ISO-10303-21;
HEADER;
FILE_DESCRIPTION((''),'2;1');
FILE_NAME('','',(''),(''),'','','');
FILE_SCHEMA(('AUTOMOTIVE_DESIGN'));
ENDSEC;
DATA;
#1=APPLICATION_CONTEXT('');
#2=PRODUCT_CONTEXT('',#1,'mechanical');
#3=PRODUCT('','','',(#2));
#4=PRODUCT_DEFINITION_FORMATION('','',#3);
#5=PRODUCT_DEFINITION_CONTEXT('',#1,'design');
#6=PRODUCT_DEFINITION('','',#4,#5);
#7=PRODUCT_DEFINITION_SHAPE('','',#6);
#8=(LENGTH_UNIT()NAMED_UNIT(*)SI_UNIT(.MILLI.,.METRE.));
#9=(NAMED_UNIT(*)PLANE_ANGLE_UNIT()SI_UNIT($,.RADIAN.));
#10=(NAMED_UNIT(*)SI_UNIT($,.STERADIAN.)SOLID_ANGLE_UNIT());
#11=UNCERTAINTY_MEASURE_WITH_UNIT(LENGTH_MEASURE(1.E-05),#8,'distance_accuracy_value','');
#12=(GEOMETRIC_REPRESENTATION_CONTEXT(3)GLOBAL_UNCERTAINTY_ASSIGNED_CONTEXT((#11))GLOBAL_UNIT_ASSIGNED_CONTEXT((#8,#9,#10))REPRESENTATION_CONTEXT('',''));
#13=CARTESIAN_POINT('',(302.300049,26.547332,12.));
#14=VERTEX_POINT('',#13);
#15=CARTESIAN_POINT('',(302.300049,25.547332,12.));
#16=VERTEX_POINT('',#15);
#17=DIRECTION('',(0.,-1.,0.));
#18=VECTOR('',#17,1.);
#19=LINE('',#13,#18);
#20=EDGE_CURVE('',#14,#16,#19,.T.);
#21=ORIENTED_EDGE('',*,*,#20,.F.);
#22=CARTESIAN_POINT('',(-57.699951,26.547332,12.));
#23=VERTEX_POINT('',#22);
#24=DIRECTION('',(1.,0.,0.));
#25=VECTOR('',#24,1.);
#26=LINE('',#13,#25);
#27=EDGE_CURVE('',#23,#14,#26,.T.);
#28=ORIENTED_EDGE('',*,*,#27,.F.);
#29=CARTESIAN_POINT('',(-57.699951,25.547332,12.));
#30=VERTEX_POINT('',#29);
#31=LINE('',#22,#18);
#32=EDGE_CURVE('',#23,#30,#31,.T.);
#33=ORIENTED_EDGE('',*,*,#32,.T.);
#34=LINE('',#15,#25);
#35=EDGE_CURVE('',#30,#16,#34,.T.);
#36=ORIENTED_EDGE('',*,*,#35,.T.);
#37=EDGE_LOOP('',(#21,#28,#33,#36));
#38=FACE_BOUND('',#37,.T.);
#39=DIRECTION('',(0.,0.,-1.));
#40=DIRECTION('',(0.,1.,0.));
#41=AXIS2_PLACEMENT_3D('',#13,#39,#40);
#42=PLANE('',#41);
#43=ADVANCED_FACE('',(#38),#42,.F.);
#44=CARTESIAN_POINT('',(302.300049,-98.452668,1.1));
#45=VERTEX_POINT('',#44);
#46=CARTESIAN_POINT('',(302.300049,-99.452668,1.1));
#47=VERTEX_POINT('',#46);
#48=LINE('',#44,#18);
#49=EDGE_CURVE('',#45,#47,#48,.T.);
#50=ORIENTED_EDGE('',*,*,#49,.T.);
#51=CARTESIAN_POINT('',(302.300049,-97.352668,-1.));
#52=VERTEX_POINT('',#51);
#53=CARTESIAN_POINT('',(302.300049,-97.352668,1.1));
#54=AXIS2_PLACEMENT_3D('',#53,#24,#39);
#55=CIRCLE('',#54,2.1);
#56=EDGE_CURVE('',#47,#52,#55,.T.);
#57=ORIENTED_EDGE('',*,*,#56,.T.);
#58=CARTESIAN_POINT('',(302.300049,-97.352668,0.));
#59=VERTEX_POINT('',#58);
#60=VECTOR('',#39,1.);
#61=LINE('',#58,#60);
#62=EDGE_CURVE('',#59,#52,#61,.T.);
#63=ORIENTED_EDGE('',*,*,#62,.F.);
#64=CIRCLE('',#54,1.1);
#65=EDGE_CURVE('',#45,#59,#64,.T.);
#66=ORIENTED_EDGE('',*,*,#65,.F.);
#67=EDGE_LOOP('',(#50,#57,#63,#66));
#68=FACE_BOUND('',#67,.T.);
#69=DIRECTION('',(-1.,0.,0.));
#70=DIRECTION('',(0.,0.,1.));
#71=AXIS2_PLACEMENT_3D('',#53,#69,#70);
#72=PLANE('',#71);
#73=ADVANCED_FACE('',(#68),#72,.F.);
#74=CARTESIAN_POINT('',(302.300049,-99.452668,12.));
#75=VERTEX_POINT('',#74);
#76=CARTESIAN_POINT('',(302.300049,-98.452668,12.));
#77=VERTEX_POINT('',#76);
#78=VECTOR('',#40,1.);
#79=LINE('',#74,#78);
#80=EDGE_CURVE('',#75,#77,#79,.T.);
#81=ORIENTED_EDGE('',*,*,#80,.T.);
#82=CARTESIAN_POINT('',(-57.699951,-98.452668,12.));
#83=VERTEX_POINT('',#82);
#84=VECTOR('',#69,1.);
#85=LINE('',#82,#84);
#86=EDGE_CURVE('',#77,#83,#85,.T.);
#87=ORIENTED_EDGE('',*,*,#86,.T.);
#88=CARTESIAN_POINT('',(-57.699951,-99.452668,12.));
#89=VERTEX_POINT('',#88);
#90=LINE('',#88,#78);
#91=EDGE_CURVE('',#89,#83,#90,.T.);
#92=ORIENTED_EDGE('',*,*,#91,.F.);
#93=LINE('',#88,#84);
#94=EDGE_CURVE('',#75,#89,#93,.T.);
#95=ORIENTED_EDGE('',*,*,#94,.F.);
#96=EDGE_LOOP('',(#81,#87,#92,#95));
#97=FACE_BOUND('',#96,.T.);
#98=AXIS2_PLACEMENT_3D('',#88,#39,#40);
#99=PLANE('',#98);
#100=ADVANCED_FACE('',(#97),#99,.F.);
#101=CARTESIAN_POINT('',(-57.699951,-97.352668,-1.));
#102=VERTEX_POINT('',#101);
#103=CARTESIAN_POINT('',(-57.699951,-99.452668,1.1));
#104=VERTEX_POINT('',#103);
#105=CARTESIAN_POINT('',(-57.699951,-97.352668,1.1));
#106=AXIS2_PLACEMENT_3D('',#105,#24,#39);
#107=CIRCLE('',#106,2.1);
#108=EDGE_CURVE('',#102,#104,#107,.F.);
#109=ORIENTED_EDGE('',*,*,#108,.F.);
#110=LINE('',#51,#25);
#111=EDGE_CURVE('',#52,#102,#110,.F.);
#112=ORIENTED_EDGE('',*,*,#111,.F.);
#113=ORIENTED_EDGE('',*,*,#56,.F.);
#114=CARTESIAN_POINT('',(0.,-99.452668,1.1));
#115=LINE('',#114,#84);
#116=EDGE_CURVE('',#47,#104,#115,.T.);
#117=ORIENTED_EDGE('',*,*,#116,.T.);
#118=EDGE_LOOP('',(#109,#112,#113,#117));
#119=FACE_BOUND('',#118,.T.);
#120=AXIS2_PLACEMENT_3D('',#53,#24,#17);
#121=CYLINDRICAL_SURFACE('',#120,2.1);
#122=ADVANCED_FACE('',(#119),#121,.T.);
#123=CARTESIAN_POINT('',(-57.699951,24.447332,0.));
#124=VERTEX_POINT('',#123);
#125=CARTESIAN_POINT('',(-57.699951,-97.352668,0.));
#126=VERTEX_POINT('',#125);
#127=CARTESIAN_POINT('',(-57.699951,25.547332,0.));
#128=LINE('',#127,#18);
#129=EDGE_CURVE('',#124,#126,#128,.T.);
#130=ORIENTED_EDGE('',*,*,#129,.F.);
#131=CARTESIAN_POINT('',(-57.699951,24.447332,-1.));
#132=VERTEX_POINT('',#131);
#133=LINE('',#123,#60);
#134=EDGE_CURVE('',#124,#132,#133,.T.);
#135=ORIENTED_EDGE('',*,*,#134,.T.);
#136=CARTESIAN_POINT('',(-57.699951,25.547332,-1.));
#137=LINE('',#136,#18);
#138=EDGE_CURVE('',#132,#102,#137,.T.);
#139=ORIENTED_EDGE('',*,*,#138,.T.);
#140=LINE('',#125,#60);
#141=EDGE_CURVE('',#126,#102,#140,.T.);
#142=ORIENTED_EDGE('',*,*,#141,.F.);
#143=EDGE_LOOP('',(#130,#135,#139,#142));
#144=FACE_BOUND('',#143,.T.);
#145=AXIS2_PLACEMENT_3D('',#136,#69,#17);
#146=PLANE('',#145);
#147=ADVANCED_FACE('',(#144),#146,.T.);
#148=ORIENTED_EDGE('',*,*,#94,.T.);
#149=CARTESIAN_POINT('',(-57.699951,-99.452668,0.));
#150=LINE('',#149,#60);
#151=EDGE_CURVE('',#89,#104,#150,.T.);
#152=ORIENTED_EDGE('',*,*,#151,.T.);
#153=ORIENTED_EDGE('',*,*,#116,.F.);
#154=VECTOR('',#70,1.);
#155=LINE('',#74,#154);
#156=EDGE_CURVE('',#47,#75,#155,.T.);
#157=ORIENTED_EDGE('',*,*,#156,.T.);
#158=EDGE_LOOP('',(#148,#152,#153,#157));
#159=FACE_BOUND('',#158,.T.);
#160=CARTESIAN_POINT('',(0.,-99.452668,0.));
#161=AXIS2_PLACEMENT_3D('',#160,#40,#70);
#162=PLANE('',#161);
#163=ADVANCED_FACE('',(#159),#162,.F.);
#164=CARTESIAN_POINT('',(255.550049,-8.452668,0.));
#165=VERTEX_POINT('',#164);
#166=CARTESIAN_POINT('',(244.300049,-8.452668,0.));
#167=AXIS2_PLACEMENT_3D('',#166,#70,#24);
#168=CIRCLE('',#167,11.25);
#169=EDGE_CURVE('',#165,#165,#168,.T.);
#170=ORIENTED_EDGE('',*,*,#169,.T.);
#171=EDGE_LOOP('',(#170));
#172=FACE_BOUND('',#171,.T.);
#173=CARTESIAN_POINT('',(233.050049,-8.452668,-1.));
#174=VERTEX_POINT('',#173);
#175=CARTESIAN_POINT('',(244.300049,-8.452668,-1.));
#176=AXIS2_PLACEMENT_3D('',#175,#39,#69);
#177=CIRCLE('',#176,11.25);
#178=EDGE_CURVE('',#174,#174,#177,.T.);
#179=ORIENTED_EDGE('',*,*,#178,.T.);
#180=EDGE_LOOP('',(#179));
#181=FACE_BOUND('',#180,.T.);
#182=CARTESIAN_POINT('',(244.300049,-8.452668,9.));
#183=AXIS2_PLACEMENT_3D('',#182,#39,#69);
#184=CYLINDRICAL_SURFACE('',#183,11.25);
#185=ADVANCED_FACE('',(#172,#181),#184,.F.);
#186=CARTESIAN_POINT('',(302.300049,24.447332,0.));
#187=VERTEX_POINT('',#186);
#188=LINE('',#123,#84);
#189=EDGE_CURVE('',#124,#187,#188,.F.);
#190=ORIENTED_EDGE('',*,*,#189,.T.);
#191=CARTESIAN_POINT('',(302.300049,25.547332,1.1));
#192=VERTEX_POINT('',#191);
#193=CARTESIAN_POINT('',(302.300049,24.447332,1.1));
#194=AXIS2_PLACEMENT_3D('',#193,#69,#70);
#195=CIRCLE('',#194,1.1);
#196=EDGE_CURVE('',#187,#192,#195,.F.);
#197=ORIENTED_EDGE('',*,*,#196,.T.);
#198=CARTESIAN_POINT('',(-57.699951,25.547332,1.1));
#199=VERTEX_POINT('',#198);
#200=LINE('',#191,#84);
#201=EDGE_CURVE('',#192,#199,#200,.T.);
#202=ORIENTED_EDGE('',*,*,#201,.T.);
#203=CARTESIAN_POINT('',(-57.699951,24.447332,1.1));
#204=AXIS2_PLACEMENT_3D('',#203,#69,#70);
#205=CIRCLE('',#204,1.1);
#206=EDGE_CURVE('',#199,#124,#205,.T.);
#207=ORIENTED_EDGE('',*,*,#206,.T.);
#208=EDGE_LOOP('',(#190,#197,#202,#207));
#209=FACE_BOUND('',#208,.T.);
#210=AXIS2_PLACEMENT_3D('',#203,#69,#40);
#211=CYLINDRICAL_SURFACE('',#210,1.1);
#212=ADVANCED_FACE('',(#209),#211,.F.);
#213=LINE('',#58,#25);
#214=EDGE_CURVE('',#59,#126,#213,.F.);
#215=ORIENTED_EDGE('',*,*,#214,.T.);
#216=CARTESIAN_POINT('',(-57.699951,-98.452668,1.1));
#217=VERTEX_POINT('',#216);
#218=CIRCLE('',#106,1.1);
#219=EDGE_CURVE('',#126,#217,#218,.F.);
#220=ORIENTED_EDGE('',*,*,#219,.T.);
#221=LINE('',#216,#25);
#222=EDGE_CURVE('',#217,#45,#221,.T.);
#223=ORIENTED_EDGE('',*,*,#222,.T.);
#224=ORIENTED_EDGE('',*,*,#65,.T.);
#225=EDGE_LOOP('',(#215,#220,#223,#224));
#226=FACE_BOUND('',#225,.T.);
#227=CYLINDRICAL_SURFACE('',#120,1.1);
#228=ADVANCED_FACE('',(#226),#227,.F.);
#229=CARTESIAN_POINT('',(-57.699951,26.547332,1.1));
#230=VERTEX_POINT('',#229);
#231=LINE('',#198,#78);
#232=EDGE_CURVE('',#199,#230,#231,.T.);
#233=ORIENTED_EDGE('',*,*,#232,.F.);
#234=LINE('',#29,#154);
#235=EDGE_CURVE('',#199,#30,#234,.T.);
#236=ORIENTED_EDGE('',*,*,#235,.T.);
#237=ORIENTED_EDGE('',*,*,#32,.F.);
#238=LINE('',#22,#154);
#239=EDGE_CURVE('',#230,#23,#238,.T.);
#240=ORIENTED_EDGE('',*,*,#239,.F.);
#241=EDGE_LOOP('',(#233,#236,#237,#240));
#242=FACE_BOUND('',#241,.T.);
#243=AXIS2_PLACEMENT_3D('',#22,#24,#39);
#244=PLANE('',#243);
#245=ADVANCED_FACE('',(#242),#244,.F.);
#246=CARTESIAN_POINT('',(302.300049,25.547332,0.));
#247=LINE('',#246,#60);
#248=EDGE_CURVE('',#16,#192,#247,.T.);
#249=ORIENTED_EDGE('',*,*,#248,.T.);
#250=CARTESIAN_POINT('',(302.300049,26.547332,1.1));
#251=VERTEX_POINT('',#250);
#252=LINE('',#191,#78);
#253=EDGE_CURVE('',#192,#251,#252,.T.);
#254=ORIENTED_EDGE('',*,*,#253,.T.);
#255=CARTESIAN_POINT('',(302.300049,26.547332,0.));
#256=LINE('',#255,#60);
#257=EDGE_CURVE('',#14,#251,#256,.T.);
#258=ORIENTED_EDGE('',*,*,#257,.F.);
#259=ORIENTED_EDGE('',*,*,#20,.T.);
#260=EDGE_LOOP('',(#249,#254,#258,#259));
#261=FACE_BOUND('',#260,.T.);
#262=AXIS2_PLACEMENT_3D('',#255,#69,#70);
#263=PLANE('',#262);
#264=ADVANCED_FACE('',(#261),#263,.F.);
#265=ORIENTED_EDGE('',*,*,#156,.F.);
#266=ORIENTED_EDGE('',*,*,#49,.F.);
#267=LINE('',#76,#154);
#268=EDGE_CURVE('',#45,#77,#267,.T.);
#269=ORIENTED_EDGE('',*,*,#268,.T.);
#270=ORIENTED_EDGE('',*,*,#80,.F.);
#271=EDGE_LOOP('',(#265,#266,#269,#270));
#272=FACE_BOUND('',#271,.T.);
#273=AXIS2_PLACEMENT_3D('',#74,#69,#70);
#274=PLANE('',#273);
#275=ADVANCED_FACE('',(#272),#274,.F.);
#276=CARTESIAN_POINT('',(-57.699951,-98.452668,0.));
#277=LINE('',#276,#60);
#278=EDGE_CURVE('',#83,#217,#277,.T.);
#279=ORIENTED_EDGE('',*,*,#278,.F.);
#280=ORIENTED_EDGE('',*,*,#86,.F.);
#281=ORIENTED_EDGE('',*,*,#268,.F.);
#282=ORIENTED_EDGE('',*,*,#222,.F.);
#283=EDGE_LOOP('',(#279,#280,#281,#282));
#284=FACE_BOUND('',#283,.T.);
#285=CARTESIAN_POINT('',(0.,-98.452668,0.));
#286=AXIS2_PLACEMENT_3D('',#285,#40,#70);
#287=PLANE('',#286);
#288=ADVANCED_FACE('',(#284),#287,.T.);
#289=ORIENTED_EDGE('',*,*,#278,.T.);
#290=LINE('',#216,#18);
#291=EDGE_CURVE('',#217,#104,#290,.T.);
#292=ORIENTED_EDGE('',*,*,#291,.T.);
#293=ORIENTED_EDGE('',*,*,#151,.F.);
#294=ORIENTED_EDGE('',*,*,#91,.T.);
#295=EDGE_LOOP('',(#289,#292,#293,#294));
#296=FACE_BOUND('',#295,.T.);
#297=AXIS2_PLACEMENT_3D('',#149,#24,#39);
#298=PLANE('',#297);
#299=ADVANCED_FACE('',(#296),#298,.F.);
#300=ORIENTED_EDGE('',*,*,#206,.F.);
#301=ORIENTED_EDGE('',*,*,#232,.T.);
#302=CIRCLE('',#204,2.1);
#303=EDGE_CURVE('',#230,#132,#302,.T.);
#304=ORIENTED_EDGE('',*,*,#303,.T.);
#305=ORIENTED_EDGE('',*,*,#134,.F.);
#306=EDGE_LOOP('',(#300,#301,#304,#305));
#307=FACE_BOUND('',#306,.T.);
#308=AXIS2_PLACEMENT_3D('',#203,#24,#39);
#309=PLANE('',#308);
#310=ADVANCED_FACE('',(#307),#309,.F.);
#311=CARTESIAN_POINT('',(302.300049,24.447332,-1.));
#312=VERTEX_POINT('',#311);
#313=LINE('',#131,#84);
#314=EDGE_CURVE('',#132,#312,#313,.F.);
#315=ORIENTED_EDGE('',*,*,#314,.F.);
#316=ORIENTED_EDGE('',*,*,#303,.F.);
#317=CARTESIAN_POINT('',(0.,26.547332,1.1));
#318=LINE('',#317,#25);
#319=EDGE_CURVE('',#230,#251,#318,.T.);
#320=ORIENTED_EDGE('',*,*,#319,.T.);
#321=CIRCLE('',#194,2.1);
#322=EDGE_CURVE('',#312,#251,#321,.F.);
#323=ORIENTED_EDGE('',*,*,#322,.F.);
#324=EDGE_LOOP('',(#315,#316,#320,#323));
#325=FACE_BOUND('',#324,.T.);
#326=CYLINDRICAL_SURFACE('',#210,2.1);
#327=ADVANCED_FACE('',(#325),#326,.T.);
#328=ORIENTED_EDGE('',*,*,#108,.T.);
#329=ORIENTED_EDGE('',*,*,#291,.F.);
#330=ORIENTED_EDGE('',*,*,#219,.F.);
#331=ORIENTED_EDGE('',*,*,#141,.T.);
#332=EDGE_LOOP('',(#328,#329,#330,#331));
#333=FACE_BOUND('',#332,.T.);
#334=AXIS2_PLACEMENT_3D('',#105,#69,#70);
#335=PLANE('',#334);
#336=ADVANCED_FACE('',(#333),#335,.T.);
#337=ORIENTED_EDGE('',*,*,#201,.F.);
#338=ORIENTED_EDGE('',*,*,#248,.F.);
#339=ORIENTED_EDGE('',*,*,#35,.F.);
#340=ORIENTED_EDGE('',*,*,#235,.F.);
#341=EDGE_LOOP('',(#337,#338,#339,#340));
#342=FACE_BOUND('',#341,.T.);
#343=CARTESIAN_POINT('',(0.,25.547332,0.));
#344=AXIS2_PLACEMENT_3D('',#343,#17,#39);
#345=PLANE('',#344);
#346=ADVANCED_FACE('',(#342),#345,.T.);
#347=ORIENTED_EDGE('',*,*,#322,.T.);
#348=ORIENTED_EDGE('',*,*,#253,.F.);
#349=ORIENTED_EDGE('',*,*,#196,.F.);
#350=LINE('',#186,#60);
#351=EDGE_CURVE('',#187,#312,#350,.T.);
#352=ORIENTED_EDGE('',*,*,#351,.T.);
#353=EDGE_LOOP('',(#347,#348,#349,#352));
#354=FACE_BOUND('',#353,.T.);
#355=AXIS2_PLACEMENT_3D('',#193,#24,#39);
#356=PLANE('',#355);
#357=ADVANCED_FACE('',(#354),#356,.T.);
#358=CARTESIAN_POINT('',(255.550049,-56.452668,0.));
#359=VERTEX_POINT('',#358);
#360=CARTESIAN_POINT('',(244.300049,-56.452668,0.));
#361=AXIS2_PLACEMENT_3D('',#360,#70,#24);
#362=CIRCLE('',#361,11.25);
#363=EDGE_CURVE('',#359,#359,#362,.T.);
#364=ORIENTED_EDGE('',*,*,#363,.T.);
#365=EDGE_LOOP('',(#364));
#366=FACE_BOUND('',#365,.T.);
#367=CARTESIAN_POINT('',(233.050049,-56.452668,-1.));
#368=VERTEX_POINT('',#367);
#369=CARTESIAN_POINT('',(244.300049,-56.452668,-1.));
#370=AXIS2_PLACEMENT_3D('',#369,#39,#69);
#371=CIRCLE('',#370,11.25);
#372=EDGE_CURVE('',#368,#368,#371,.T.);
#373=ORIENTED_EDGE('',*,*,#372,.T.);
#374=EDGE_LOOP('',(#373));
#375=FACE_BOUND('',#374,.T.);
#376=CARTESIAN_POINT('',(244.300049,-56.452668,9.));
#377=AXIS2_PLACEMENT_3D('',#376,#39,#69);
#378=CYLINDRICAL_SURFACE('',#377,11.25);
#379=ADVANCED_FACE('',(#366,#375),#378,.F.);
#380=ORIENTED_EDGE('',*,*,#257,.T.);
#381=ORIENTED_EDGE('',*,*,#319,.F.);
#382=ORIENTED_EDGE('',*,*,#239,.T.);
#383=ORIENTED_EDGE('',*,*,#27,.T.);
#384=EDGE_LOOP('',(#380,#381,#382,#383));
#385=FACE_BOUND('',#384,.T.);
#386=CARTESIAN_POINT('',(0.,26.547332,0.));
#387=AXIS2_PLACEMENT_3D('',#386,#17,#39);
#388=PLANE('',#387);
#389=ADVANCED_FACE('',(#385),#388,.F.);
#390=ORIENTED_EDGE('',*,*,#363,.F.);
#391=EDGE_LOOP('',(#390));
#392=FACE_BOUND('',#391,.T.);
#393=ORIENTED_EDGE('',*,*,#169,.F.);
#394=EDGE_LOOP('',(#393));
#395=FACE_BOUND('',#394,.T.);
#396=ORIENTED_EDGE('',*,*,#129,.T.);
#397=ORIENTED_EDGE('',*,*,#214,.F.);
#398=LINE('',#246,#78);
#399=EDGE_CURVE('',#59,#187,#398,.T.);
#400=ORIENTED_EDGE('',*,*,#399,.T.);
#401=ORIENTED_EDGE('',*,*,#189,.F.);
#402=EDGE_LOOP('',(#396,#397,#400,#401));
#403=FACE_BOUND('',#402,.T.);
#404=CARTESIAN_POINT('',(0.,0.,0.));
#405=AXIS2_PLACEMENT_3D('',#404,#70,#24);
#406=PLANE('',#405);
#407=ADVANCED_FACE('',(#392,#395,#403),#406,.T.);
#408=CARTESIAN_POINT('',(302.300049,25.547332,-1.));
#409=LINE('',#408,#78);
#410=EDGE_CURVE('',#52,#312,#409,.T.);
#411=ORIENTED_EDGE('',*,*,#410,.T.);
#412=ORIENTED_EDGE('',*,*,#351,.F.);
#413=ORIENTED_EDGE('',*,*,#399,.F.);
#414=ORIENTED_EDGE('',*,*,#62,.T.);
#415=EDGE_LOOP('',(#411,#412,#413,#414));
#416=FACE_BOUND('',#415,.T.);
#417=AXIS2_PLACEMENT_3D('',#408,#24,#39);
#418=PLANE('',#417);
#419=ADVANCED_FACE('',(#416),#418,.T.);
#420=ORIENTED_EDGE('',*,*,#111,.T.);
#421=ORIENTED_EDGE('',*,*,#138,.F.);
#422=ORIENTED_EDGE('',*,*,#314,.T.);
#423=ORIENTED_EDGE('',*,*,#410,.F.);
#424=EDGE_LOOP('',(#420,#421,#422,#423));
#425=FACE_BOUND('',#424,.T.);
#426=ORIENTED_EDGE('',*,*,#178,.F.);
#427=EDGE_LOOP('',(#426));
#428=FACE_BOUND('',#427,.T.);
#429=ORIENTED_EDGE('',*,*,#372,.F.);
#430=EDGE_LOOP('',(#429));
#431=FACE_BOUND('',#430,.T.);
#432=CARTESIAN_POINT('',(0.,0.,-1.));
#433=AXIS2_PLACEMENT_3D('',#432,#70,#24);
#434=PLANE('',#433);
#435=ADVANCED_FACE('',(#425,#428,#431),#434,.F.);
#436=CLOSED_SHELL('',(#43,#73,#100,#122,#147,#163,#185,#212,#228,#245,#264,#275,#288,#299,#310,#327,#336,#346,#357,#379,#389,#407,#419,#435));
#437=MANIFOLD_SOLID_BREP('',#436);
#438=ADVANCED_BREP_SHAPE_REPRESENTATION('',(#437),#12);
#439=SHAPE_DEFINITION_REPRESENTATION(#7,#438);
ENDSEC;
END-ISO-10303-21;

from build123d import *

# Parameters (mm, degrees)
SKETCH_1_W                         = 360
SKETCH_1_H                         = 124
SM_BASE_FLANGE_1_DEPTH             = 1
SM_EDGE_FLANGE_1_STRIP_W           = 6.2
SM_EDGE_FLANGE_1_STRIP_H           = 1
SM_EDGE_FLANGE_1_STRIP_CUT_DEPTH   = 360
SM_EDGE_FLANGE_1_STRIP_2_W         = 6.2
SM_EDGE_FLANGE_1_STRIP_2_H         = 1
SM_EDGE_FLANGE_1_STRIP_CUT_2_DEPTH = 360
SM_EDGE_FLANGE_1_DEPTH             = 360
SM_EDGE_FLANGE_1_BEND_DEPTH        = 360
SKETCH_8_R                         = 11.25
CUT_EXTRUDE_1_DEPTH                = 10


# Sheet-metal steps are written as plain solids
with BuildPart() as part:
    # Sketch 1 → Базовая кромка1 (new body)
    with BuildSketch(Plane.XY):
        with Locations((122.300049421, -36.452668213)):
            Rectangle(SKETCH_1_W, SKETCH_1_H)
    extrude(amount=-SM_BASE_FLANGE_1_DEPTH)

    # Ребро-кромка1 strip (across the edge) → Ребро-кромка1 strip cut (cut)
    with BuildSketch(Plane(origin=(302.300049421, 25.547331787, 0), x_dir=(0, -1, 0), z_dir=(-1, 0, 0))):
        with Locations((-2, -0.5)):
            Rectangle(SM_EDGE_FLANGE_1_STRIP_W, SM_EDGE_FLANGE_1_STRIP_H)
    extrude(amount=SM_EDGE_FLANGE_1_STRIP_CUT_DEPTH, mode=Mode.SUBTRACT)

    # Ребро-кромка1 strip 2 (across the edge) → Ребро-кромка1 strip cut 2 (cut)
    with BuildSketch(Plane(origin=(-57.699950579, -98.452668213, 0), x_dir=(0, 1, 0), z_dir=(1, 0, 0))):
        with Locations((-2, -0.5)):
            Rectangle(SM_EDGE_FLANGE_1_STRIP_2_W, SM_EDGE_FLANGE_1_STRIP_2_H)
    extrude(amount=SM_EDGE_FLANGE_1_STRIP_CUT_2_DEPTH, mode=Mode.SUBTRACT)

    # Ребро-кромка1 section (across the edge) → Ребро-кромка1 (add)
    with BuildSketch(Plane(origin=(302.300049421, 25.547331787, 0), x_dir=(0, -1, 0), z_dir=(-1, 0, 0))):
        with BuildLine():
            Line((-1, 1.1), (-1, 12))
            Line((-1, 12), (0, 12))
            Line((0, 12), (0, 1.1))
            ThreePointArc((0, 1.1), (0.322182541, 0.322182541), (1.1, 0))
            Line((1.1, 0), (1.1, -1))
            ThreePointArc((1.1, -1), (-0.38492424, -0.38492424), (-1, 1.1))
        make_face()
    extrude(amount=SM_EDGE_FLANGE_1_DEPTH)

    # Ребро-кромка1 section 2 (across the edge) → Ребро-кромка1 bend (add)
    with BuildSketch(Plane(origin=(-57.699950579, -98.452668213, 0), x_dir=(0, 1, 0), z_dir=(1, 0, 0))):
        with BuildLine():
            Line((-1, 1.1), (-1, 12))
            Line((-1, 12), (0, 12))
            Line((0, 12), (0, 1.1))
            ThreePointArc((0, 1.1), (0.322182541, 0.322182541), (1.1, 0))
            Line((1.1, 0), (1.1, -1))
            ThreePointArc((1.1, -1), (-0.38492424, -0.38492424), (-1, 1.1))
        make_face()
    extrude(amount=SM_EDGE_FLANGE_1_BEND_DEPTH)

    # Эскиз8 → Вырез-Вытянуть1 (cut)
    with BuildSketch(Plane(origin=(0, 0, -1), x_dir=(-1, 0, 0), z_dir=(0, 0, -1))):
        with Locations((-244.300049421, -8.452668213)):
            Circle(SKETCH_8_R)
        with Locations((-244.300049421, -56.452668213)):
            Circle(SKETCH_8_R)
    extrude(amount=-CUT_EXTRUDE_1_DEPTH, mode=Mode.SUBTRACT)


solid = part.part
